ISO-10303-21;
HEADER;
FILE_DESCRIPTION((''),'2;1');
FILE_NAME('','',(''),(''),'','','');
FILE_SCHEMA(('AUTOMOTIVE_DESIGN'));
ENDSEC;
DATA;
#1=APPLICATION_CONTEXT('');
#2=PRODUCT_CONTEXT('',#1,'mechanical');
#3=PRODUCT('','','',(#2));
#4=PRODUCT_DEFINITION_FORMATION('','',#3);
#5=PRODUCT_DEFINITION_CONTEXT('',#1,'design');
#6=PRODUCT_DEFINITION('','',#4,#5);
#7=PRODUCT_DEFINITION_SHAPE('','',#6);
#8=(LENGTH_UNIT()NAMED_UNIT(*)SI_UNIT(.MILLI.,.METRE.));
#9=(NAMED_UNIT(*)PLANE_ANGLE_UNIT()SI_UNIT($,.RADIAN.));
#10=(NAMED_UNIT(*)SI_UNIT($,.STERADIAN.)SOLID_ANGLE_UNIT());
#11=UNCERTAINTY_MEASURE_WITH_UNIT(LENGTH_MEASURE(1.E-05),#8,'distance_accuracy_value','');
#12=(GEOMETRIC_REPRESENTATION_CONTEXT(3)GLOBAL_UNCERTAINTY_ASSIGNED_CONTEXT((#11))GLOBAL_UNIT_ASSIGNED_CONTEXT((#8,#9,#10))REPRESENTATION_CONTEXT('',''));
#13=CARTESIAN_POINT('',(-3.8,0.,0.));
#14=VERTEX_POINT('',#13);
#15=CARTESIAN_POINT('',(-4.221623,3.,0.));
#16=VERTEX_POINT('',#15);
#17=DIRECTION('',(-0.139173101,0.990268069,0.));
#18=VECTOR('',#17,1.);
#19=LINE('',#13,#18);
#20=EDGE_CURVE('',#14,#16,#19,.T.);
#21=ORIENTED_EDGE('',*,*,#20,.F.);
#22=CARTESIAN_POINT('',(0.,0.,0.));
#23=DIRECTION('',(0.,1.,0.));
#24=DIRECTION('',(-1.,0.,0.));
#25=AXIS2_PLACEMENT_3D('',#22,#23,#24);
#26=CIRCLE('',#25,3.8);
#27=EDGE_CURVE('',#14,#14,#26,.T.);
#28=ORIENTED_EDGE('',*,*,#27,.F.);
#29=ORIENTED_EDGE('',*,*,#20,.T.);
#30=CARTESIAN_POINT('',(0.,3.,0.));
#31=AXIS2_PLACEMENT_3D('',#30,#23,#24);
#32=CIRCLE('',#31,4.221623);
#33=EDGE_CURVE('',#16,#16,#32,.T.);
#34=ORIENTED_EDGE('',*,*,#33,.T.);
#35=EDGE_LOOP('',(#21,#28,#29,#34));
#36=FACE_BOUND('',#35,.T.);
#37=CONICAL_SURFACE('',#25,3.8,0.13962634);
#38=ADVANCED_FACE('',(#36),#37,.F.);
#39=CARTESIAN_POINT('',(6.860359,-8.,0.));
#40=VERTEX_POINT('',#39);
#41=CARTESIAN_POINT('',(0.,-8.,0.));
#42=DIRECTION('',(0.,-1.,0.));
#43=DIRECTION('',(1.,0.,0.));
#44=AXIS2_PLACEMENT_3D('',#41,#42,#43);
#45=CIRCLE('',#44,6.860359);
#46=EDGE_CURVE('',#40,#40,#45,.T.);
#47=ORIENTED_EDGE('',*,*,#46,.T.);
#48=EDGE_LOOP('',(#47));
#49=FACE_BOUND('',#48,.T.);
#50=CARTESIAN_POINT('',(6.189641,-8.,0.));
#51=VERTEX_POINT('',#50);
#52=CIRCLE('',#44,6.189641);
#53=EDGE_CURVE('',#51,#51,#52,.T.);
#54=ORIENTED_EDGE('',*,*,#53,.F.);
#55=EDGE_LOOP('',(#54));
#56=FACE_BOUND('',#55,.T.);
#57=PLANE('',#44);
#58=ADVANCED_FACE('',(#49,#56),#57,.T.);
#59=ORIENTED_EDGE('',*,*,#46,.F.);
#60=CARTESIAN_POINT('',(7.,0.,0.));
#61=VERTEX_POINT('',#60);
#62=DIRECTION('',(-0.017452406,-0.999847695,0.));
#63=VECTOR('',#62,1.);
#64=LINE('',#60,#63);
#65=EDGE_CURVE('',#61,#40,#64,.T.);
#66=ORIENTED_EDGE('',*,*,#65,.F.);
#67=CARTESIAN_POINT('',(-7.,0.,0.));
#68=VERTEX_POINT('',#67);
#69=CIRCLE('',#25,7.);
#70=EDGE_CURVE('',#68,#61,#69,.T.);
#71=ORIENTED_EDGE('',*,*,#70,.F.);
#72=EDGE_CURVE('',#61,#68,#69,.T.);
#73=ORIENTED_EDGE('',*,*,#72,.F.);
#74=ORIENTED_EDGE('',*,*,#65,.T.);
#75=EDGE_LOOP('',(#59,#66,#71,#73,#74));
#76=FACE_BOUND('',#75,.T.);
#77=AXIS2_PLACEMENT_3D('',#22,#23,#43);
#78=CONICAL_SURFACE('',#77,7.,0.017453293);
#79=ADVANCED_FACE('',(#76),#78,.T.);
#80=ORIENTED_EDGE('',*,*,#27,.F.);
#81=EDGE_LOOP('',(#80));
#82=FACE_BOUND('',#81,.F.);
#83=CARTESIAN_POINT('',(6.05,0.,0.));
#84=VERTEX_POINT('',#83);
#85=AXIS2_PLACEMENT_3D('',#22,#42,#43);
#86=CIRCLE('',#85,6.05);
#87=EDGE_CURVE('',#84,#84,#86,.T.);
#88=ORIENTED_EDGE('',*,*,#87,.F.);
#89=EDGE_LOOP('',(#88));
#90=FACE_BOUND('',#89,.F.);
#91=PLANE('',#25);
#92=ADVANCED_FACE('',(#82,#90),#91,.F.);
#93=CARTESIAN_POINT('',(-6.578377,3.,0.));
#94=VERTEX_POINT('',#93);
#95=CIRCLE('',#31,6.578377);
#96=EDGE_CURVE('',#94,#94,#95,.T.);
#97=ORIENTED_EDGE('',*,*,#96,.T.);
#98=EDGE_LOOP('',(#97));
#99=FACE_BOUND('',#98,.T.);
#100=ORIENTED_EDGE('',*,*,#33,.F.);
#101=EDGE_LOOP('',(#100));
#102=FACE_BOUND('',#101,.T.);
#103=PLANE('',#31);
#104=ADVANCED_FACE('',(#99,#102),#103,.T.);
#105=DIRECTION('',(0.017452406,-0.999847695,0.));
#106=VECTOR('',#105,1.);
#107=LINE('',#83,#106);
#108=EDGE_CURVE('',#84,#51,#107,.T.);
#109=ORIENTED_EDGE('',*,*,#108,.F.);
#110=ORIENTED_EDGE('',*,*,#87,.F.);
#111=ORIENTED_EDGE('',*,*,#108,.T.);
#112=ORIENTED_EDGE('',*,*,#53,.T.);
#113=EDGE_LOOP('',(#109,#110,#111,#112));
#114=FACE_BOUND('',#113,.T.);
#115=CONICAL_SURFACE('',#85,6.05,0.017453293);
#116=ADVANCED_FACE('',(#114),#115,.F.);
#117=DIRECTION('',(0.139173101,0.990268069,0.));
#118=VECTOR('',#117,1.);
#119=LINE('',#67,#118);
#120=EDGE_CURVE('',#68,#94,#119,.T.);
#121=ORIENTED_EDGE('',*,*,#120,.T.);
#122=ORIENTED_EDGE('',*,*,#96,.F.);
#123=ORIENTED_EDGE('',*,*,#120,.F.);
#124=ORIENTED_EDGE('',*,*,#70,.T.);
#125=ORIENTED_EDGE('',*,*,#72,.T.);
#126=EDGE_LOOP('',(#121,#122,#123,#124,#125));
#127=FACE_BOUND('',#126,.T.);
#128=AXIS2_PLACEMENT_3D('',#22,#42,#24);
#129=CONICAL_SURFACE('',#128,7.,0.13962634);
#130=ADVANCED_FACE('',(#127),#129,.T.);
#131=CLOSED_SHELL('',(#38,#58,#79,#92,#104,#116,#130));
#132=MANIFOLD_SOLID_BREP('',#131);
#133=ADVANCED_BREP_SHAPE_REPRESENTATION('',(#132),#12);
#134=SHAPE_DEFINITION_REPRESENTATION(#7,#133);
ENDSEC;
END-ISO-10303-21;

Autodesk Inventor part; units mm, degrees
ref_plane "YZ Plane" through (0, 0, 0) normal (1, 0, 0) x (0, 1, 0)
ref_plane "XZ Plane" through (0, 0, 0) normal (0, 1, 0) x (-1, 0, 0)
ref_plane "XY Plane" through (0, 0, 0) normal (0, 0, 1) x (1, 0, 0)
sketch "Skizze1" plane through (0, 0, 0) normal (0, 1, 0) x (-1, 0, 0)
  circle A0 centre (0, 0) radius 7
  circle A1 centre (0, 0) radius 3.8
  dimension "d0" = 14
  dimension "d1" = 7.6
extrude "Extrusion1" add sketch "Skizze1" along normal blind 3 draft -8
ref_plane "Arbeitsebene1" through (0, -0.6, 0) normal (0, -1, 0) x (1, 0, 0)
sketch "Skizze3" plane through (0, 0, 0) normal (0, -1, 0) x (1, 0, 0)
  circle A0 centre (0, 0) radius 7 projected
  circle A1 centre (0, 0) radius 6.05
  dimension "d7" = 12.1
extrude "Extrusion3" add sketch "Skizze3" along normal blind 8 draft -1
properties part number "ESP32_M12_CCTVAdapter"
